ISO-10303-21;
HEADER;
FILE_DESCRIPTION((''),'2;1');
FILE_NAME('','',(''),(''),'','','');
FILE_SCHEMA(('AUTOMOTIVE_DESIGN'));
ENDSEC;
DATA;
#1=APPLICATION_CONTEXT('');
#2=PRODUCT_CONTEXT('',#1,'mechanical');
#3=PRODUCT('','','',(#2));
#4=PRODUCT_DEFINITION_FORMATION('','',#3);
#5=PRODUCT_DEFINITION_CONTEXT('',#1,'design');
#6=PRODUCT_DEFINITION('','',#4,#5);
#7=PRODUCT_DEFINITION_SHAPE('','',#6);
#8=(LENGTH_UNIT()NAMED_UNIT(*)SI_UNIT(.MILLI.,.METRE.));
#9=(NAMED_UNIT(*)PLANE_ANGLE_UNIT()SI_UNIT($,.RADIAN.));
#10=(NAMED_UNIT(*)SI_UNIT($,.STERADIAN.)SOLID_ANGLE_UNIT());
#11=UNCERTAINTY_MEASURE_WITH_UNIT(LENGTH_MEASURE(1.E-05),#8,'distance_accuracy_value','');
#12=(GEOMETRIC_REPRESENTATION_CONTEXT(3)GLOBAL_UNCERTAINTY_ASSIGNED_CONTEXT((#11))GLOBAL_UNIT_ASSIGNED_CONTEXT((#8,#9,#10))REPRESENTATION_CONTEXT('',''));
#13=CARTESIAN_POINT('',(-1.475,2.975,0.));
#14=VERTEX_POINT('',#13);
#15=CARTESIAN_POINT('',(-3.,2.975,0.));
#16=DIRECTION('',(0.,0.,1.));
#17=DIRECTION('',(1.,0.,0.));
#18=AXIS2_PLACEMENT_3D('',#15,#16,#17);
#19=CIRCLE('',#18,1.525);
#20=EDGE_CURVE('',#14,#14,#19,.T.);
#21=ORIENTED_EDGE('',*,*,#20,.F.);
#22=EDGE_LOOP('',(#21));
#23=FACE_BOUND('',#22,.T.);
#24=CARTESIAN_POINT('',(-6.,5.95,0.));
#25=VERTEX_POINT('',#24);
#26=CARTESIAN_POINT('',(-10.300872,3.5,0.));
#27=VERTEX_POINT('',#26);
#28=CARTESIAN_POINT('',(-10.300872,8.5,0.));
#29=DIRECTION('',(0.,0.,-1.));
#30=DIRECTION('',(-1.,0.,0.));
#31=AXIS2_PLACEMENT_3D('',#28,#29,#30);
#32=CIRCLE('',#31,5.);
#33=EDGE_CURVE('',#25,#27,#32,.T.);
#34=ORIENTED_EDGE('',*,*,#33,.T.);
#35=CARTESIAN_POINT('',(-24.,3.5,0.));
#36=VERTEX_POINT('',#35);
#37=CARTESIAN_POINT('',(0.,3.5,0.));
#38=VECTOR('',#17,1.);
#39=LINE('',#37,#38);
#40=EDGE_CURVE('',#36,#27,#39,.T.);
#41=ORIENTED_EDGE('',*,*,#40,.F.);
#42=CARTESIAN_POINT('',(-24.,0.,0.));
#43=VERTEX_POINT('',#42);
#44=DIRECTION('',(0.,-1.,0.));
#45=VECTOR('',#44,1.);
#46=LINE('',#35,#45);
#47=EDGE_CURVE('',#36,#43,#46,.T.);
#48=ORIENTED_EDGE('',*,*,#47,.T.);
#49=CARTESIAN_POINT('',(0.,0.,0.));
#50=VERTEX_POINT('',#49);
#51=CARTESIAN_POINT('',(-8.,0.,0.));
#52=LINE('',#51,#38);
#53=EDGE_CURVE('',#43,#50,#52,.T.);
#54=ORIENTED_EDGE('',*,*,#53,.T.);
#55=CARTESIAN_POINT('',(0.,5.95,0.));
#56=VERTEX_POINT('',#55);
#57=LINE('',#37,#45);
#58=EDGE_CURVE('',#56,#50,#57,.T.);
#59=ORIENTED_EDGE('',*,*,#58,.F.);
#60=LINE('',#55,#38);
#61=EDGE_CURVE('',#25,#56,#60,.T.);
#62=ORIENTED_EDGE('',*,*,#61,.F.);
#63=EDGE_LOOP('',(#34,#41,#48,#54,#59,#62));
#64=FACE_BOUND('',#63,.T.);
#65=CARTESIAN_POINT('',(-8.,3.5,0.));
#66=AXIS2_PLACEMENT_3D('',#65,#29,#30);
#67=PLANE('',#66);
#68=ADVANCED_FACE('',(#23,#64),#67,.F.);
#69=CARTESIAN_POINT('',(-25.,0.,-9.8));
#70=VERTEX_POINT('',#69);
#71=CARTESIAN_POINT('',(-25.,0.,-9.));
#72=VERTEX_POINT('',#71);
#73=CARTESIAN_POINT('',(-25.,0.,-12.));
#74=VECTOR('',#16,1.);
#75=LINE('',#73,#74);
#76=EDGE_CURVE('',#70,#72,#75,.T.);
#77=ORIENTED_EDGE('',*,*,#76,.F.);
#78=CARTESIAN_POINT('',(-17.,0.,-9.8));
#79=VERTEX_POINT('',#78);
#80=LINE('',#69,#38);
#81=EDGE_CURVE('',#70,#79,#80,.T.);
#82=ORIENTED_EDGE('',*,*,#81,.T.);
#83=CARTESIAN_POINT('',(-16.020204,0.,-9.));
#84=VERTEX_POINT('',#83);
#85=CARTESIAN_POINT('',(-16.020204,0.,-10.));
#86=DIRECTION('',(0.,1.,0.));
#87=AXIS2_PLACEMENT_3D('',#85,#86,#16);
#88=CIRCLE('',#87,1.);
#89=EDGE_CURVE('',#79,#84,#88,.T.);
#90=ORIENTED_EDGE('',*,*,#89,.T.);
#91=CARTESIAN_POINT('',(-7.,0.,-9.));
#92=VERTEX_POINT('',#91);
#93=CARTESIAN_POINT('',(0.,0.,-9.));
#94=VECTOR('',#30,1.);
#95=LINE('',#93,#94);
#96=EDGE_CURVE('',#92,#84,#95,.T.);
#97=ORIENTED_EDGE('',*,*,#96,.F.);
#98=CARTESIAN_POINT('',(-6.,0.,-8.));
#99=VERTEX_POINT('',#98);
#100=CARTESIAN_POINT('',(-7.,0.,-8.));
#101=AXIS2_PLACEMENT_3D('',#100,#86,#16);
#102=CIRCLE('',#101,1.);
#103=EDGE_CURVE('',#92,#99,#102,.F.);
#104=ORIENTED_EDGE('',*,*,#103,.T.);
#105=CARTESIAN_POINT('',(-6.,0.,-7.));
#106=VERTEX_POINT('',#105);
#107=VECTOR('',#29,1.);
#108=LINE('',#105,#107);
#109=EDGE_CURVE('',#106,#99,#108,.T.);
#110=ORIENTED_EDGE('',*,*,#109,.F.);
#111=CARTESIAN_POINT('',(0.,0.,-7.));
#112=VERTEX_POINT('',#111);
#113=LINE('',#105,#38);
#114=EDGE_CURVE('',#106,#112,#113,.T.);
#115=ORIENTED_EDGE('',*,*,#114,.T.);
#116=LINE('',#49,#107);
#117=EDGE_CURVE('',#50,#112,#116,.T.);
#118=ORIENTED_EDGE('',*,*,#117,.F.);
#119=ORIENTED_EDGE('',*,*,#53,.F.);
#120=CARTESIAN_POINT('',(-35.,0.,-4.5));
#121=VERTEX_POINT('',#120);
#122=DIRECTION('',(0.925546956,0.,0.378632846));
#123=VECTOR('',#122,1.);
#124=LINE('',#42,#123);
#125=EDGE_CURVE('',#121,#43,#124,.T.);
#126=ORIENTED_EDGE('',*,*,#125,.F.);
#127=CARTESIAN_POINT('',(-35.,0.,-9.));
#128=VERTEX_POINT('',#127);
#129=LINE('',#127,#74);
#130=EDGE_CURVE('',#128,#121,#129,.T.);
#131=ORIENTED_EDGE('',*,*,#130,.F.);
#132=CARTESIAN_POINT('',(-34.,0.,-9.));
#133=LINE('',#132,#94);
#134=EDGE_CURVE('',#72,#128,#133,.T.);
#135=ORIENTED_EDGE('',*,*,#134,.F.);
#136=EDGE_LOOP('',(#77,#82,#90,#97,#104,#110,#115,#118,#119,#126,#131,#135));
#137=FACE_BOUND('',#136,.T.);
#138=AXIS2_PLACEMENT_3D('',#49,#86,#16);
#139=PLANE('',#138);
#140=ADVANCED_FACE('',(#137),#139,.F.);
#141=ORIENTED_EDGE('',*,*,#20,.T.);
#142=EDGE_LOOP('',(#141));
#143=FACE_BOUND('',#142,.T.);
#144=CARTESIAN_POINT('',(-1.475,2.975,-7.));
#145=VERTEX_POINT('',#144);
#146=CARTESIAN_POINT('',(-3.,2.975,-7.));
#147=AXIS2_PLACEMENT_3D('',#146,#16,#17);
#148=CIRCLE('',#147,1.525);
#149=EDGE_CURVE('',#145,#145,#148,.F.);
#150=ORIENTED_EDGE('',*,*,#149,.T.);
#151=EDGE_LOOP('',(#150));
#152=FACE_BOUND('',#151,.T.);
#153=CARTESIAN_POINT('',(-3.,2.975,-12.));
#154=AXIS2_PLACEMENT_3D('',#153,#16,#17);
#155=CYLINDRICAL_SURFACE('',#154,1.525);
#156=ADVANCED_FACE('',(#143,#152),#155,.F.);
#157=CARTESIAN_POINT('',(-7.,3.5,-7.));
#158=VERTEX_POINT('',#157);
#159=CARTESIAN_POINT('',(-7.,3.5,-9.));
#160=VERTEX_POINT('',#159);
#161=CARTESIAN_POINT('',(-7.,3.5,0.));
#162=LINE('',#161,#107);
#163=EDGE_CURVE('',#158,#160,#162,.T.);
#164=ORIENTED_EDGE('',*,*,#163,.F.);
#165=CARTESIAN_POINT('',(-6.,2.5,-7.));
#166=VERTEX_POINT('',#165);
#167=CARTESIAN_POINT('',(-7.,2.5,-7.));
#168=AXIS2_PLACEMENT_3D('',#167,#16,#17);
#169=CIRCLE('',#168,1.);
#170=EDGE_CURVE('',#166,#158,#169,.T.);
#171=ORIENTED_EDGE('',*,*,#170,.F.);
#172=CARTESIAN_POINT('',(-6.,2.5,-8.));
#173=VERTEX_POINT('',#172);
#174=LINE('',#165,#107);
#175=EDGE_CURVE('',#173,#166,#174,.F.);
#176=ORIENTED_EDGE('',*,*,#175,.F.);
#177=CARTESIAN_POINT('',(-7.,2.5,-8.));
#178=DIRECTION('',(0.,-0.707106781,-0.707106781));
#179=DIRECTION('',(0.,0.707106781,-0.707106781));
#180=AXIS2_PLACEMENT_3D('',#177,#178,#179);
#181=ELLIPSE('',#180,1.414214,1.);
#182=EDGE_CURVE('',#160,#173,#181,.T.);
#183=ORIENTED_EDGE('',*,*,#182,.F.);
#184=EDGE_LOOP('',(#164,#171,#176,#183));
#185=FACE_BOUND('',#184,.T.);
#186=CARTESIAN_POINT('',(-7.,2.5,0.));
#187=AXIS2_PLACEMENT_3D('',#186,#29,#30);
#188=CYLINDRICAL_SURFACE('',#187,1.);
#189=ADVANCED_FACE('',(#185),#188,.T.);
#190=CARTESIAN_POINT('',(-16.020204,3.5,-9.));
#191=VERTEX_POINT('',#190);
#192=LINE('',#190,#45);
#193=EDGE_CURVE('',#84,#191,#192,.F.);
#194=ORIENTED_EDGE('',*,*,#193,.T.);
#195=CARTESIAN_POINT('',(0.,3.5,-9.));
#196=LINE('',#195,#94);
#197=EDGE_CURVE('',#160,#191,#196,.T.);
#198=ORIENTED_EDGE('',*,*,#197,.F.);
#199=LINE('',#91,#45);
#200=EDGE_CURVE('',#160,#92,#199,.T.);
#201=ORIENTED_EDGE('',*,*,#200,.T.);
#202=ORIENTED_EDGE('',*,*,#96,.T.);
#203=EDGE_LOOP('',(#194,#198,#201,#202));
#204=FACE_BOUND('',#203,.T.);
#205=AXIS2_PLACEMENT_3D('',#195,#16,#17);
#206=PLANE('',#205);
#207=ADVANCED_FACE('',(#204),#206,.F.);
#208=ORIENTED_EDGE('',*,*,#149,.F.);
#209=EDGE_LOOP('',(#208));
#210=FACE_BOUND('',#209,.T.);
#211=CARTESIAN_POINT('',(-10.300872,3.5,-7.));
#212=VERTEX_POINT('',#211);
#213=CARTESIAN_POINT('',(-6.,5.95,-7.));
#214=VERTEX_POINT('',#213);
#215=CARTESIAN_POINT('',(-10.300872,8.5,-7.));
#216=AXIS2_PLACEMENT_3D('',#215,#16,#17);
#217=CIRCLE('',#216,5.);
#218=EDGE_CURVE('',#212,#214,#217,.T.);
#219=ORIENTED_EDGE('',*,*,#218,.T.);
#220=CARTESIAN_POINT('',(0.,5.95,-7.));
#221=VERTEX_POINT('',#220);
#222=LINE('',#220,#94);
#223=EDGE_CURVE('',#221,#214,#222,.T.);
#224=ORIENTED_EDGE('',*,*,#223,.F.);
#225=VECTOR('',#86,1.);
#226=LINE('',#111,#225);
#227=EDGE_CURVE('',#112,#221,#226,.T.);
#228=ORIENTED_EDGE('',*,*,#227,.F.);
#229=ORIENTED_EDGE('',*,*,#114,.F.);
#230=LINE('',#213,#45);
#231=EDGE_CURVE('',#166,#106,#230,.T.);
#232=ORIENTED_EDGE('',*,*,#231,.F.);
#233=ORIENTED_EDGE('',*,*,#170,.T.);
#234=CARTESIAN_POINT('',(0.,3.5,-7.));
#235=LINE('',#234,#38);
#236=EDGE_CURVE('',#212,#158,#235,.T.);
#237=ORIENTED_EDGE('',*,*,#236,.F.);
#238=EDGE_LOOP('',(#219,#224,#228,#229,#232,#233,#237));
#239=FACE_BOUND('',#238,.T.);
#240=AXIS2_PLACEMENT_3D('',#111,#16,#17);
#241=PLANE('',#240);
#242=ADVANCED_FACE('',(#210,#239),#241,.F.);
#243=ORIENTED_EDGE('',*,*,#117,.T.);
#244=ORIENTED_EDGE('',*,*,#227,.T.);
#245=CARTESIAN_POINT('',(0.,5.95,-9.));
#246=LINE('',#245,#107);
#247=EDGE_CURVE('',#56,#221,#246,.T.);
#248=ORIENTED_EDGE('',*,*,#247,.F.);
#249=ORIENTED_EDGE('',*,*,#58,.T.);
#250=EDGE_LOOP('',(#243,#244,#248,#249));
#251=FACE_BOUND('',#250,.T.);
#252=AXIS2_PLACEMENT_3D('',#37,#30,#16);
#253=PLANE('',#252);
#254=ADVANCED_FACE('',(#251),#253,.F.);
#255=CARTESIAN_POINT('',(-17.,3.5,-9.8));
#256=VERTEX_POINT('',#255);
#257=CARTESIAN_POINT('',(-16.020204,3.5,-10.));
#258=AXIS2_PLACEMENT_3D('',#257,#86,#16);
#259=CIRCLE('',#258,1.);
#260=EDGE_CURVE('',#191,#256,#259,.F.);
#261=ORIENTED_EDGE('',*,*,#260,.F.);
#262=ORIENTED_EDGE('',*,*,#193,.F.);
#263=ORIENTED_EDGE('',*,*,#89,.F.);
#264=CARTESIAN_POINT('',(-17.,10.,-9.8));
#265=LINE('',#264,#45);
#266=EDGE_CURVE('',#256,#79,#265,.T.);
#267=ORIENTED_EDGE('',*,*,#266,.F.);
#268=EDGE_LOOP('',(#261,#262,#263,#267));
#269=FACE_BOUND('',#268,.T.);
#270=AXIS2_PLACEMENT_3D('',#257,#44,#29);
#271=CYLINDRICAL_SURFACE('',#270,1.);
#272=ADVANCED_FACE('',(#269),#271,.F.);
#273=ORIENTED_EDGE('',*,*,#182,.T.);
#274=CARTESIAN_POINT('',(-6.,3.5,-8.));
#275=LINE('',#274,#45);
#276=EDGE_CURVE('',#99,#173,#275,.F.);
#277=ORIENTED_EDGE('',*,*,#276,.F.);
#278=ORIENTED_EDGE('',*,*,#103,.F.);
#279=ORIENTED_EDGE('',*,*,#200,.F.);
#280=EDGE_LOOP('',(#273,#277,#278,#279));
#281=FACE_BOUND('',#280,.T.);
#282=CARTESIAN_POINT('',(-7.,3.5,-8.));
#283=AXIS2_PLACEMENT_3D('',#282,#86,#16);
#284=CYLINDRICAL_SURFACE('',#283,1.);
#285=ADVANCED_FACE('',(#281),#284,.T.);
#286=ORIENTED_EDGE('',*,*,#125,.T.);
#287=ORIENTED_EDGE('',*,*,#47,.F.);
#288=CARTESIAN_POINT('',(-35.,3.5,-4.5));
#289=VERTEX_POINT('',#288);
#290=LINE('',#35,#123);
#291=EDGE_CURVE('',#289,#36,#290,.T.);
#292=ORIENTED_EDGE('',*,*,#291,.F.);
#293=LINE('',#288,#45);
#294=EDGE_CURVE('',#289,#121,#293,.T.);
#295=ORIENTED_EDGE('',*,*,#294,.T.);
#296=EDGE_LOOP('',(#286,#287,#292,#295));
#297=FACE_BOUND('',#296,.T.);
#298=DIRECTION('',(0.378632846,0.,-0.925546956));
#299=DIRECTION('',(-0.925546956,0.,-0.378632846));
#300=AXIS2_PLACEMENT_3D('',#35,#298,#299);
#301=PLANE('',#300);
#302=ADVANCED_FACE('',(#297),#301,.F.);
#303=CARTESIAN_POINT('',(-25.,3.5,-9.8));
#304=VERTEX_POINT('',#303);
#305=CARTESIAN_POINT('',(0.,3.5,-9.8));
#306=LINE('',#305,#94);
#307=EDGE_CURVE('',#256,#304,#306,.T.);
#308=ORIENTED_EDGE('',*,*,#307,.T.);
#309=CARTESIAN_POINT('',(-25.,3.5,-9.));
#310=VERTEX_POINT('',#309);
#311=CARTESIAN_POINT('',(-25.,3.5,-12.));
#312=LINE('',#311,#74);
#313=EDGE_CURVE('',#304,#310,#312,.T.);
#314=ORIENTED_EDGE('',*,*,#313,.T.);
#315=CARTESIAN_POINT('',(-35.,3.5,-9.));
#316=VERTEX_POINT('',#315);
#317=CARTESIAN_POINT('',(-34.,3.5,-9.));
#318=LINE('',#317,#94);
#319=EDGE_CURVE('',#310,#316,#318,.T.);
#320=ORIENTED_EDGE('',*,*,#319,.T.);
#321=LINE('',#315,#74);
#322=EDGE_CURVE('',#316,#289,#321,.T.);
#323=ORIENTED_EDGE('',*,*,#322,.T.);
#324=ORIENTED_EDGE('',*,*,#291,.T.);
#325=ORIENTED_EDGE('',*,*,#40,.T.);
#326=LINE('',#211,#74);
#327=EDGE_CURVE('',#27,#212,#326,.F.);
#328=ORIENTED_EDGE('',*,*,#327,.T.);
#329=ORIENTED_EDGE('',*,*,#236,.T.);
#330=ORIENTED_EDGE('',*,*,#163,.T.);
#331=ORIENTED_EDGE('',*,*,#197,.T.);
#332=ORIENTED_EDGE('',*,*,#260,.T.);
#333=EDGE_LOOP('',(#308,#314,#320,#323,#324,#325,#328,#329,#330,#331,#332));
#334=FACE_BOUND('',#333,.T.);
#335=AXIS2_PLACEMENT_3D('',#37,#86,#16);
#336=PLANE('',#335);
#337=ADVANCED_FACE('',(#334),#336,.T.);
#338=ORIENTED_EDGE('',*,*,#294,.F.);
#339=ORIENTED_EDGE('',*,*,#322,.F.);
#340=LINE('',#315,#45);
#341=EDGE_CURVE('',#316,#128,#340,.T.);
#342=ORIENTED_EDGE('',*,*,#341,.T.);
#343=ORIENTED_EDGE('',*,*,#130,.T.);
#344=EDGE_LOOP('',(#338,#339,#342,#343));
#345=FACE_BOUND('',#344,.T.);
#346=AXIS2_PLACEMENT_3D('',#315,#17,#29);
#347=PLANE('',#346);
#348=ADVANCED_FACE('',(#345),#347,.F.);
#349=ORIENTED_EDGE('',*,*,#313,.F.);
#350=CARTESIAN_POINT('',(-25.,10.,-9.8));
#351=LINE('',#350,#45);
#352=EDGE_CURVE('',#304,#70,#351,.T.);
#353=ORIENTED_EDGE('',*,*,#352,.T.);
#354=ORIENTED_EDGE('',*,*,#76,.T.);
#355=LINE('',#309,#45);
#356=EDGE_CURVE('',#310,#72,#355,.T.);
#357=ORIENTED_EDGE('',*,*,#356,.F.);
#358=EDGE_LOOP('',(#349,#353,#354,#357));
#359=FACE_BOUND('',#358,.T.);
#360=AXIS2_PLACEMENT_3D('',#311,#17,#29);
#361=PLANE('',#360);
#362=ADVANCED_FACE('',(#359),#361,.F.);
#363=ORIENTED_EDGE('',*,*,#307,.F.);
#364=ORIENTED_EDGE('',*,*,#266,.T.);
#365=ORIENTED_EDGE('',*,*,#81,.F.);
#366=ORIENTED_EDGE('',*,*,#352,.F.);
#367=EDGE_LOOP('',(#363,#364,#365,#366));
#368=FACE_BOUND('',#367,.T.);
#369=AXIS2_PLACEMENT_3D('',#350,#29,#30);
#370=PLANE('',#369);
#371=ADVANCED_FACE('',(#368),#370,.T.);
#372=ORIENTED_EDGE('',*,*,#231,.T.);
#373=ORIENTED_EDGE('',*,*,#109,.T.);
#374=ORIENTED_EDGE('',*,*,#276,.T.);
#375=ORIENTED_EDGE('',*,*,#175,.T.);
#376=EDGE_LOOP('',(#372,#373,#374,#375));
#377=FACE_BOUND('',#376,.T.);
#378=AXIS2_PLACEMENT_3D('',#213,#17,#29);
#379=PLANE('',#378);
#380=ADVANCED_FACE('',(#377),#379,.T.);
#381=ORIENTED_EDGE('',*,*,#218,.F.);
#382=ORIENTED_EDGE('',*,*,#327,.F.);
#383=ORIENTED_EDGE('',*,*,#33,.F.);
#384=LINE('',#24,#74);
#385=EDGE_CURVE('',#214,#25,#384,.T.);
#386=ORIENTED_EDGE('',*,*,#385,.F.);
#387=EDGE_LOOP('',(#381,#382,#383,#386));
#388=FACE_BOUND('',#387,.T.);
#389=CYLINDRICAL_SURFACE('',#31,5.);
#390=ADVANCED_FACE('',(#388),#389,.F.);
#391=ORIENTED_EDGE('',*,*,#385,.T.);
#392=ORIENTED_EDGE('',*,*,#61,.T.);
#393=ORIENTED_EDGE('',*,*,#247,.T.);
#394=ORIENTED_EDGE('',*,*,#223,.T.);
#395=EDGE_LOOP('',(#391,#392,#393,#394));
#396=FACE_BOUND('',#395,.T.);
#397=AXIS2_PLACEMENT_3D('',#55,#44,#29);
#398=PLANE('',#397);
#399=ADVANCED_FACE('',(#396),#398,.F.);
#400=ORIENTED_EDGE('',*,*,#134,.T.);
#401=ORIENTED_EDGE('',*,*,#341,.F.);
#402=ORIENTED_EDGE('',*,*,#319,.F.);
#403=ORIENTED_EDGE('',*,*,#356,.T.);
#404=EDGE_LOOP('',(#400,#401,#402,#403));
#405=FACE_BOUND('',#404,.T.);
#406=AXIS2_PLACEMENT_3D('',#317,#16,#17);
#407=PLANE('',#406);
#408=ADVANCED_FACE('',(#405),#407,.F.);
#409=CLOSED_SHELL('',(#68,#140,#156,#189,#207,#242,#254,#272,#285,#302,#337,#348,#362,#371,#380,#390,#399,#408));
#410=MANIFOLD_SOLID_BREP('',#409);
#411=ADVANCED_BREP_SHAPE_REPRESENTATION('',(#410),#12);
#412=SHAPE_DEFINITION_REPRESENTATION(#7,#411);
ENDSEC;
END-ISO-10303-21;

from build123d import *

# Parameters (mm, degrees)
EXTRUDE_1_DEPTH     = 3.5
SKETCH_2_W          = 6
SKETCH_2_H          = 9
EXTRUDE_2_DEPTH     = 5.95
SKETCH_3_R          = 1.525
CUT_EXTRUDE_1_DEPTH = 38.475358571
SKETCH_4_W          = 8
SKETCH_4_H          = 2.2
CUT_EXTRUDE_2_DEPTH = 10
CUT_EXTRUDE_START   = -9
SKETCH_5_W          = 6
SKETCH_5_H          = 5.95
CUT_EXTRUDE_4_DEPTH = 2
FILLET_1_R          = 5
FILLET_2_R          = 1
FILLET_3_R          = 1


with BuildPart() as part:
    # 草图1 → 凸台-拉伸1 (new body)
    with BuildSketch(Plane(origin=(0, 0, 0), x_dir=(1, 0, 0), z_dir=(0, 1, 0))):
        Polygon((0, 0), (0, 9), (-17, 9), (-17, 12), (-24, 12), (-25, 12), (-25, 9), (-34, 9), (-35, 9), (-35, 4.5), (-24, 0), (-8, 0), align=None)
    extrude(amount=EXTRUDE_1_DEPTH)

    # 草图2 → 凸台-拉伸2 (add)
    with BuildSketch(Plane(origin=(0, 0, 0), x_dir=(1, 0, 0), z_dir=(0, 1, 0))):
        with Locations((-3, 4.5)):
            Rectangle(SKETCH_2_W, SKETCH_2_H)
    extrude(amount=EXTRUDE_2_DEPTH)

    # 草图3 → 切除-拉伸1 (cut, through all)
    with BuildSketch(Plane.XY):
        with Locations((-3, 2.975)):
            Circle(SKETCH_3_R)
    extrude(amount=-CUT_EXTRUDE_1_DEPTH, mode=Mode.SUBTRACT)

    # 草图4 → 切除-拉伸2 (cut)
    with BuildSketch(Plane(origin=(0, 0, 0), x_dir=(1, 0, 0), z_dir=(0, 1, 0))):
        with Locations((-21, 10.9)):
            Rectangle(SKETCH_4_W, SKETCH_4_H)
    extrude(amount=CUT_EXTRUDE_2_DEPTH, mode=Mode.SUBTRACT)

    # 草图5 → 切除-拉伸4 (cut)
    with BuildSketch(Plane.XY.offset(CUT_EXTRUDE_START)):
        with Locations((-3, 2.975)):
            Rectangle(SKETCH_5_W, SKETCH_5_H)
    extrude(amount=CUT_EXTRUDE_4_DEPTH, mode=Mode.SUBTRACT)

    # 圆角1
    # the kernel refuses this fillet: 5 mm, written as the material it adds along each edge
    with BuildSketch(Plane(origin=(-6, 3.5, -7), x_dir=(-1, 0, 0), z_dir=(0, 0, 1))) as fillet_1_piece_1:
        with BuildLine():
            CenterArc((4.300872005, -5), FILLET_1_R, 90, 59.336170258)
            Line((0, -2.45), (0, 0))
            Line((0, 0), (4.300872005, 0))
        make_face()
    extrude(amount=7)

    # 圆角2
    fillet_2_edges = [part.edges().sort_by_distance(p)[0] for p in [
        (-6, 3.5, -8),
        (-6, 1.75, -9),
    ]]
    fillet(fillet_2_edges, radius=FILLET_2_R)

    # 圆角3
    # the kernel refuses this fillet: 1 mm, written as the material it adds along each edge
    with BuildSketch(Plane(origin=(-17, 0, -9), x_dir=(1, 0, 0), z_dir=(0, 1, 0))) as fillet_3_piece_1:
        with BuildLine():
            CenterArc((0.979795897, 1), FILLET_3_R, 191.536959033, 78.463040967)
            Line((0, 0.8), (-0.019595918, 0.796))
            ThreePointArc((-0.019595918, 0.796), (-0.02, 0.4), (-0.02, 0))
            Line((-0.02, 0), (0, -0.02))
            Line((0, -0.02), (0.979795897, -0.02))
            Line((0.979795897, -0.02), (0.979795897, 0))
        make_face()
    extrude(amount=3.5)


solid = part.part
